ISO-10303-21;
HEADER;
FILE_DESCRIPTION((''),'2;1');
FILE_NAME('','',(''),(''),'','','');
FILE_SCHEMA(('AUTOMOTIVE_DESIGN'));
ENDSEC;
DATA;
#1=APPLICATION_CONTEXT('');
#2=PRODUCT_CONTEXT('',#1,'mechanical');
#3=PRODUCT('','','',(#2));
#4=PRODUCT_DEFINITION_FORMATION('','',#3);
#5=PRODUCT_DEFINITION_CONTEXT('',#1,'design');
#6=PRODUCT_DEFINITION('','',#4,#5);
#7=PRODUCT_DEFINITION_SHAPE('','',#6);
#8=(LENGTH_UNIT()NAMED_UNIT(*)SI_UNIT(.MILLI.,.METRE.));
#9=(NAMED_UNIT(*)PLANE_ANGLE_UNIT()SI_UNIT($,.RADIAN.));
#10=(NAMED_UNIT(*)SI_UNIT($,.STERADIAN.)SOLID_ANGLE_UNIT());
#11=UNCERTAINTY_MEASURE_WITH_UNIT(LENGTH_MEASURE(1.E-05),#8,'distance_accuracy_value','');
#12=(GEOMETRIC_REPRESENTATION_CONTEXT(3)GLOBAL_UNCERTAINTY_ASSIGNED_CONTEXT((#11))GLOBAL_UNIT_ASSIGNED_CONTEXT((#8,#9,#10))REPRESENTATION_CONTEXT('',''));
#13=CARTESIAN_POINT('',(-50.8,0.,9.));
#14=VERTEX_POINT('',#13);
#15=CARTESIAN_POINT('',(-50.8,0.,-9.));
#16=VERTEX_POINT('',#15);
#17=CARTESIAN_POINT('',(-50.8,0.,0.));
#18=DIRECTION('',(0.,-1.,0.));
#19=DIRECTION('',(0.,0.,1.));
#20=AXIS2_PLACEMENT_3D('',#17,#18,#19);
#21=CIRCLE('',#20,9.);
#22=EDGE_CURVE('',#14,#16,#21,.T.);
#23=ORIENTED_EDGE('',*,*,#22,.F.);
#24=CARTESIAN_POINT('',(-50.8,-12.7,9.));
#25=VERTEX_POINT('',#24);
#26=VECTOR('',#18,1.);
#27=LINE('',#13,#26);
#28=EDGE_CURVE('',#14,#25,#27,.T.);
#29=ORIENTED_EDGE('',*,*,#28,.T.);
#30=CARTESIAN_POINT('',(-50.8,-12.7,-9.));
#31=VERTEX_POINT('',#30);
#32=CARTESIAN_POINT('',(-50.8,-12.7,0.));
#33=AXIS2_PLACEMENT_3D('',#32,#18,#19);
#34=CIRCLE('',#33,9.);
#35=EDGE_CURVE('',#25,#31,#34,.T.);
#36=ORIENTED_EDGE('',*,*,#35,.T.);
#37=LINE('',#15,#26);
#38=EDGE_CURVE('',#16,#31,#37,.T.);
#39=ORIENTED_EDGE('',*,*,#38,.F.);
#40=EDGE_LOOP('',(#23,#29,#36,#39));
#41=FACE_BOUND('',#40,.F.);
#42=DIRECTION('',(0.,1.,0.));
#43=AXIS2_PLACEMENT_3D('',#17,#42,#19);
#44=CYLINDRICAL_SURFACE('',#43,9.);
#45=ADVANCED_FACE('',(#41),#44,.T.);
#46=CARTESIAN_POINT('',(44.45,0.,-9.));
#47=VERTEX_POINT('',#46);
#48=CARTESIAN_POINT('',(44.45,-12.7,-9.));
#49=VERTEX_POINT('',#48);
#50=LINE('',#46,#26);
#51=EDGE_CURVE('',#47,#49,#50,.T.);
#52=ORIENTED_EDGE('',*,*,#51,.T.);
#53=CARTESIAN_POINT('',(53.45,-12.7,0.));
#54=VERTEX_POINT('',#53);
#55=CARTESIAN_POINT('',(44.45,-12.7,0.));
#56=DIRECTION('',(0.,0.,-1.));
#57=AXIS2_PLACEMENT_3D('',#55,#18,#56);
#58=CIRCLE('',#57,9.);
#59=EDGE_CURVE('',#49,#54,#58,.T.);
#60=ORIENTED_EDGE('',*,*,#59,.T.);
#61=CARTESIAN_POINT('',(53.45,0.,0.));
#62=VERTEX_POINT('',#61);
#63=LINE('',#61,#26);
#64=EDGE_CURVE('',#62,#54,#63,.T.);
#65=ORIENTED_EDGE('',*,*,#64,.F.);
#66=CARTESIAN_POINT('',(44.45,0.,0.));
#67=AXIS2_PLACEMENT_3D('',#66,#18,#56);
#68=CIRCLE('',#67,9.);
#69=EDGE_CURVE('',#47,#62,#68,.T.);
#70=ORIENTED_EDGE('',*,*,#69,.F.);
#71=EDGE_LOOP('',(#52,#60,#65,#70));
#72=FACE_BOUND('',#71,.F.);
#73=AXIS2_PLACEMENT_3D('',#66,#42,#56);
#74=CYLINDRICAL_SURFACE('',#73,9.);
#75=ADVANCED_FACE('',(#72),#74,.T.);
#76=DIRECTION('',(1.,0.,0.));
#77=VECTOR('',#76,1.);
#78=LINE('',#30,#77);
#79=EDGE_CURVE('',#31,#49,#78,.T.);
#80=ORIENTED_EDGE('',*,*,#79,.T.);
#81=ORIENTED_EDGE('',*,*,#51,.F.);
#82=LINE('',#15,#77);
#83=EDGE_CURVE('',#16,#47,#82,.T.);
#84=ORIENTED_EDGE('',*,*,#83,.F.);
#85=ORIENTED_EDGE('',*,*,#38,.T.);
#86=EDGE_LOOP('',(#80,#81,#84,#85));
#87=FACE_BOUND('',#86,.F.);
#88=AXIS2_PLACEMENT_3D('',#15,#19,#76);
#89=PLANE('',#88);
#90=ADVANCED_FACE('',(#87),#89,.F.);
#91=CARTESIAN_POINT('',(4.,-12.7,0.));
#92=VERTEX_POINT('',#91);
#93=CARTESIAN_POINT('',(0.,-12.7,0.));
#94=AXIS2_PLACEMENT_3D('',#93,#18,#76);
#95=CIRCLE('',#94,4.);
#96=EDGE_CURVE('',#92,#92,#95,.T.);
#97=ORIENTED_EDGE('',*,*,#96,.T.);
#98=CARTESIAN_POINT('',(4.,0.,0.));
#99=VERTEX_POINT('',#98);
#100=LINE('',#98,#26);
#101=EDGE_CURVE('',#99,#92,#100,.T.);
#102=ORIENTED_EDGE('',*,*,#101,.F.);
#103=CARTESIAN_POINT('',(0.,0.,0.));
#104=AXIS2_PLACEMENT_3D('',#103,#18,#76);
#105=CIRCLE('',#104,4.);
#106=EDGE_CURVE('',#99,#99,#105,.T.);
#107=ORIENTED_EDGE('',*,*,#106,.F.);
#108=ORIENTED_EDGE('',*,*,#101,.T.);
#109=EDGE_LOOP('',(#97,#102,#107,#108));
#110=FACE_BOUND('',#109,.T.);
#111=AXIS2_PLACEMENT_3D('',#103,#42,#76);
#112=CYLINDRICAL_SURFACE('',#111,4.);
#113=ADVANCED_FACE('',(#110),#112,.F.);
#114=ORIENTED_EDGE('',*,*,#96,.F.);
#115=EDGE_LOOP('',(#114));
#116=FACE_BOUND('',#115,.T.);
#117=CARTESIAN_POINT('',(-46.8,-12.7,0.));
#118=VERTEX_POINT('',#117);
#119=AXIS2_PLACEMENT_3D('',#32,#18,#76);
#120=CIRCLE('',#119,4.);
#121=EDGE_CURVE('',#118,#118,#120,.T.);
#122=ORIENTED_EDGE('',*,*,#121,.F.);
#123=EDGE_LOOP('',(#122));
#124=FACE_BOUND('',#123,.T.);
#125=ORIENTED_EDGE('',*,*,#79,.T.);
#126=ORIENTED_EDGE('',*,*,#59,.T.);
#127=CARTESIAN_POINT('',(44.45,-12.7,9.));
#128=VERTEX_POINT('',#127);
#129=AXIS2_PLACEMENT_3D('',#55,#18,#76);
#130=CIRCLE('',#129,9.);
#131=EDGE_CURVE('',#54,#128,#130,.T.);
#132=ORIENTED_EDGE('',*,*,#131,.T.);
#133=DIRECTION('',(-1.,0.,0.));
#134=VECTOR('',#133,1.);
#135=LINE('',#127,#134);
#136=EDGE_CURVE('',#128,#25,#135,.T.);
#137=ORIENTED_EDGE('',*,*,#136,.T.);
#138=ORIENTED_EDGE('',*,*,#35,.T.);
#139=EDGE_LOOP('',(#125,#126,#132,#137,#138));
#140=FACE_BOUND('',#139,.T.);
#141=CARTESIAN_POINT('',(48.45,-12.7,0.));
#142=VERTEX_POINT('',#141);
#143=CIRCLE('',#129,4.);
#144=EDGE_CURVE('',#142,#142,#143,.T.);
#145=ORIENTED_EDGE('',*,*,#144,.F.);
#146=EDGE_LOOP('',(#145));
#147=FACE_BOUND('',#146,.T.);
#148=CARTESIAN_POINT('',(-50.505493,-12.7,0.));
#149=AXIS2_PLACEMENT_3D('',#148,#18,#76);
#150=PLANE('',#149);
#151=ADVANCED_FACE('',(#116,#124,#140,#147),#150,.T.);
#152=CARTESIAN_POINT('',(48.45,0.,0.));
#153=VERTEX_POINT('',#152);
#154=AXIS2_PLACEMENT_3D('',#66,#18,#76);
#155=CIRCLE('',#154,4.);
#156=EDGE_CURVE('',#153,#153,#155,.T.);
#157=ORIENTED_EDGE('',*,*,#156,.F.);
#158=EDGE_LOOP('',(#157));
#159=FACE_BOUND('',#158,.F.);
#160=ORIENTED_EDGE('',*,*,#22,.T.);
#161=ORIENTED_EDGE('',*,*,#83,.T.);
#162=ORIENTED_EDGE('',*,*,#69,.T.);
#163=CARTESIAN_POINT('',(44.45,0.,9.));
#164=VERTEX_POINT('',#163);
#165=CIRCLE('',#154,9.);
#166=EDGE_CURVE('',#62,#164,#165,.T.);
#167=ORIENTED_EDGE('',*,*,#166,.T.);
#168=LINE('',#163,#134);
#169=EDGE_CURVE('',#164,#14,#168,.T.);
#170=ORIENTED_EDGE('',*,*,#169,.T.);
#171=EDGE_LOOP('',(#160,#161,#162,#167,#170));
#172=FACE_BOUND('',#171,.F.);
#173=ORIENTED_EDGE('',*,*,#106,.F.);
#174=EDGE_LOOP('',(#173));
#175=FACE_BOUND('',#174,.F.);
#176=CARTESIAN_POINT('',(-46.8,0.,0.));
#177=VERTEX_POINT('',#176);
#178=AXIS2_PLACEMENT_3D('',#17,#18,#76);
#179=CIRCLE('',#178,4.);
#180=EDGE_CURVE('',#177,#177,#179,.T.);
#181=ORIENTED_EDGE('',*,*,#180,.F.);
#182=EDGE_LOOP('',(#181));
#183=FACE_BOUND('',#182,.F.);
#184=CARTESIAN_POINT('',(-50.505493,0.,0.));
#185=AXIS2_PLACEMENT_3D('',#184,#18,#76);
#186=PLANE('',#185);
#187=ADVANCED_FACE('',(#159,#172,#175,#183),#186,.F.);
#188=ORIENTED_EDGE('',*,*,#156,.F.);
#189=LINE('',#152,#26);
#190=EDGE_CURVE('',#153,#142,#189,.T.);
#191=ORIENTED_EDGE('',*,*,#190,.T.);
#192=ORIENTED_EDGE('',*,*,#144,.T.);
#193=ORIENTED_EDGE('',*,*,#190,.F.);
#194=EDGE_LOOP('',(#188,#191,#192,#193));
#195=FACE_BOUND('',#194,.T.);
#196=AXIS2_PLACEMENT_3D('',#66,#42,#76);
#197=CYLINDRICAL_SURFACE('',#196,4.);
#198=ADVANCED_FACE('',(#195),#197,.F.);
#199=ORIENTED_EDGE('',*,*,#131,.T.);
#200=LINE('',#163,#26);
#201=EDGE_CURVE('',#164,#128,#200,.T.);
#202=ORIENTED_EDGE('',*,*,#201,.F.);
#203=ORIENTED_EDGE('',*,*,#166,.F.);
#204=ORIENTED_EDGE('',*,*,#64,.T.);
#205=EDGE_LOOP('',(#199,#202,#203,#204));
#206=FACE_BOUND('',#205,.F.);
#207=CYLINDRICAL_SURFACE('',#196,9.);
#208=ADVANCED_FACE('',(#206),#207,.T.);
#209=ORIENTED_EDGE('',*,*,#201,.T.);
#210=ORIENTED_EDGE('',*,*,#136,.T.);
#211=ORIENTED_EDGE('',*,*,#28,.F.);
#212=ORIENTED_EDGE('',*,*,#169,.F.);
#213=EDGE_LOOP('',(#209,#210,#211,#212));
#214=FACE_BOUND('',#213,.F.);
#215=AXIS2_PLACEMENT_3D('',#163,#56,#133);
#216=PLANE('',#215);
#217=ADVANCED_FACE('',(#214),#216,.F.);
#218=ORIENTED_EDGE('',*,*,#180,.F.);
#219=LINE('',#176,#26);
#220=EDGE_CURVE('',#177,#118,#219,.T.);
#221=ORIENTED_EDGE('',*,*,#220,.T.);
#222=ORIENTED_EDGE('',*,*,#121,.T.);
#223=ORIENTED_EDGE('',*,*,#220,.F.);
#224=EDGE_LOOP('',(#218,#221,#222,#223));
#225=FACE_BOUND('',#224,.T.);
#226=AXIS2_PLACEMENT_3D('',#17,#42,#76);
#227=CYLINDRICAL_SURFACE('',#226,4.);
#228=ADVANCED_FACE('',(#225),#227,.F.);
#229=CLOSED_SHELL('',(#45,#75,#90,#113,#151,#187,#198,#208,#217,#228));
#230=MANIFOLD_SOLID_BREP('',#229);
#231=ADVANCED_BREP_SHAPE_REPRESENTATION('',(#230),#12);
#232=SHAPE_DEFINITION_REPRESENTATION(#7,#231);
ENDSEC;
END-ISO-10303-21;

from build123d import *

# Parameters (mm, degrees)
F0_R     = 4
F1_DEPTH = 12.7


# Not quite as in the source:
# - a feature names something its author has since deleted; it is built from what else it names


with BuildPart() as f1:
    # F0 (on Front) → F1 (new body)
    with BuildSketch(Plane.XZ):
        with BuildLine():
            ThreePointArc((-50.8, -9), (-44.4360389693, -6.3639610307), (-41.8, 0))
            ThreePointArc((-41.8, 0), (-44.4360389693, 6.3639610307), (-50.8, 9))
            ThreePointArc((-50.8, 9), (-59.8, 0), (-50.8, -9))
        make_face()
        with Locations((-50.8, 0)):
            Circle(F0_R, mode=Mode.SUBTRACT)
        with BuildLine():
            ThreePointArc((9, 0), (6.3639610238, 6.3639610375), (-1.93e-08, 9))
            ThreePointArc((-1.93e-08, 9), (-9, -9.7e-09), (0, -9))
            ThreePointArc((0, -9), (6.3639610307, -6.3639610307), (9, 0))
        make_face()
        Circle(F0_R, mode=Mode.SUBTRACT)
        with BuildLine():
            ThreePointArc((-50.8, 9), (-44.4360389693, 6.3639610307), (-41.8, 0))
            ThreePointArc((-41.8, 0), (-44.4360389693, -6.3639610307), (-50.8, -9))
            Line((-50.8, -9), (0, -9))
            ThreePointArc((0, -9), (-9, -9.7e-09), (-1.93e-08, 9))
            Line((-1.93e-08, 9), (-50.8, 9))
        make_face()
        with BuildLine():
            Line((44.45, 9), (-1.93e-08, 9))
            ThreePointArc((-1.93e-08, 9), (6.3639610238, 6.3639610375), (9, 0))
            ThreePointArc((9, 0), (6.3639610307, -6.3639610307), (0, -9))
            Line((0, -9), (44.45, -9))
            ThreePointArc((44.45, -9), (35.45, 0), (44.45, 9))
        make_face()
        with BuildLine():
            ThreePointArc((53.45, 0), (50.8139610307, 6.3639610307), (44.45, 9))
            ThreePointArc((44.45, 9), (35.45, 0), (44.45, -9))
            ThreePointArc((44.45, -9), (50.8139610307, -6.3639610307), (53.45, 0))
        make_face()
        with Locations((44.45, 0)):
            Circle(F0_R, mode=Mode.SUBTRACT)
    extrude(amount=F1_DEPTH)


solid = f1.part
